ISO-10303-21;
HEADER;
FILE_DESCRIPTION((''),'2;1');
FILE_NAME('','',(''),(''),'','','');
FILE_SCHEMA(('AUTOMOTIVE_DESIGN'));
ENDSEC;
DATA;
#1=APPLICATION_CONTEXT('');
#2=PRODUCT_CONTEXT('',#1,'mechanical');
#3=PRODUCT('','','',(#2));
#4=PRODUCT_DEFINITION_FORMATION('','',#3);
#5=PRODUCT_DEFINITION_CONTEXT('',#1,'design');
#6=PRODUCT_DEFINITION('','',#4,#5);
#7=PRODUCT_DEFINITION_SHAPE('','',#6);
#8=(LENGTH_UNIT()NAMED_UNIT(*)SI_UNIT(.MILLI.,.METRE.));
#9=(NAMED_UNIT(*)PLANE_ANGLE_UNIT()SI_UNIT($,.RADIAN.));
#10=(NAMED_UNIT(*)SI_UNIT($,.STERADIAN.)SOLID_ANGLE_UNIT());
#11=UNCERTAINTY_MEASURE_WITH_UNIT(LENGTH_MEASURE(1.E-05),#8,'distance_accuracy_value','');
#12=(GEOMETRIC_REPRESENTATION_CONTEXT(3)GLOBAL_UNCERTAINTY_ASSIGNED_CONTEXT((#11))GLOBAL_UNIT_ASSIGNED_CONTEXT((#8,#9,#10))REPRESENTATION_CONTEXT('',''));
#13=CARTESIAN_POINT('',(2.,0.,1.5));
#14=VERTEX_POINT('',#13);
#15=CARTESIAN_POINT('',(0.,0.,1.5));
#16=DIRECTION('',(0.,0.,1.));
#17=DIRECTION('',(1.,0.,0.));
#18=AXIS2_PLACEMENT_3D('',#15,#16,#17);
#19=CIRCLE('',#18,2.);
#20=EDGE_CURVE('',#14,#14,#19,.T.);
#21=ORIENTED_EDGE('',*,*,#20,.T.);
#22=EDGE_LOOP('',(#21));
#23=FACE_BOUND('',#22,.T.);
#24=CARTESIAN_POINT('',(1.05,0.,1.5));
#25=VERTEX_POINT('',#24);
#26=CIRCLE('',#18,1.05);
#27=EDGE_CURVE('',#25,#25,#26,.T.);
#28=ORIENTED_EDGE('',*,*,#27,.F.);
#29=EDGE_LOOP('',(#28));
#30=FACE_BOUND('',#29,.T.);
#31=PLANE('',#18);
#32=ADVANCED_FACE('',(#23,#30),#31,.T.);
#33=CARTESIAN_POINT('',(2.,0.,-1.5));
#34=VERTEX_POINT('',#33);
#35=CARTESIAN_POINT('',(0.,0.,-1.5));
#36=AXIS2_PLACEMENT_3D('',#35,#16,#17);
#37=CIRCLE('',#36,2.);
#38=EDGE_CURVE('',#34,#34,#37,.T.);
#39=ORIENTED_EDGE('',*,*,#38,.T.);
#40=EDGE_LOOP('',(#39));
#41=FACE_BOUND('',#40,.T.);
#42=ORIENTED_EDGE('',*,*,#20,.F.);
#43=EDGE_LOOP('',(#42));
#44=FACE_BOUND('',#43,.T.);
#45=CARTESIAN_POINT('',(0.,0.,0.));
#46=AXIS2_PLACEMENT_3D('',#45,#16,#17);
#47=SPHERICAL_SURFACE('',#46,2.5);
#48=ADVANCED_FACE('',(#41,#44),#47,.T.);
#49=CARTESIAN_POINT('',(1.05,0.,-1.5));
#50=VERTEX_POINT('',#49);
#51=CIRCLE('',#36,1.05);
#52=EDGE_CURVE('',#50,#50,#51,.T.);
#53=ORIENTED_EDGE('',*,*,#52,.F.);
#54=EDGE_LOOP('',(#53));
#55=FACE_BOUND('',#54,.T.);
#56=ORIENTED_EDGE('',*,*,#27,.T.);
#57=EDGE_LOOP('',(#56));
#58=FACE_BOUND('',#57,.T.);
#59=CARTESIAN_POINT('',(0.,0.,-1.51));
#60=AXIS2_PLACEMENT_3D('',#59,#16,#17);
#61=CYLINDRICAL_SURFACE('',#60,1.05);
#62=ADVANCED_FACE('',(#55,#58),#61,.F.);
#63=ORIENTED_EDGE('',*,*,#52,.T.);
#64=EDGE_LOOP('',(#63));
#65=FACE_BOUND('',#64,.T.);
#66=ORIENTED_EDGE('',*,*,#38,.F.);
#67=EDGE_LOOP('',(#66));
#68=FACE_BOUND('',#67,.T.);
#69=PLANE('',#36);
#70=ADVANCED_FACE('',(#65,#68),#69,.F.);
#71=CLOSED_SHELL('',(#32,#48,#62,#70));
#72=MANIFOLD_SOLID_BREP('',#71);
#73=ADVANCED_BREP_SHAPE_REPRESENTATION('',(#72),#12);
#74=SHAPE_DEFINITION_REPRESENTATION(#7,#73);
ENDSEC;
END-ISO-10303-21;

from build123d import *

# Parameters (mm, degrees)
FLAT_HEIGHT_ENVELOPE_START = -1.5
SKETCH1_R                  = 2.51
FLAT_HEIGHT_ENVELOPE_DEPTH = 3
SKETCH2_R                  = 1.05
D2P1_MOUNTING_BORE_DEPTH   = 3.01


# Read off the part's stored shape, not the designer's step: Truncated_True_Sphere
with BuildPart() as part:
    # Sketch1 → Flat_Height_Envelope (new body)
    with BuildSketch(Plane.XY.offset(FLAT_HEIGHT_ENVELOPE_START)):
        Circle(SKETCH1_R)
    extrude(amount=FLAT_HEIGHT_ENVELOPE_DEPTH)

    # Truncated_True_Sphere outline → Truncated_True_Sphere (revolve, cut)
    with BuildSketch(Plane.XZ):
        with BuildLine():
            ThreePointArc((1.999999998, 1.500000002), (2.5, 0), (1.999999998, -1.500000002))
            Line((1.999999998, -1.500000002), (2.51, -1.500000002))
            Line((2.51, -1.500000002), (2.51, 1.5))
            Line((2.51, 1.5), (1.999999998, 1.500000002))
        make_face()
    revolve(axis=Axis((0, 0, 0), (0, 0, 1)), mode=Mode.SUBTRACT)

    # Sketch2 → D2p1_Mounting_Bore (cut)
    with BuildSketch(Plane.XY.offset(1.5)):
        Circle(SKETCH2_R)
    extrude(amount=-D2P1_MOUNTING_BORE_DEPTH, mode=Mode.SUBTRACT)


solid = part.part
